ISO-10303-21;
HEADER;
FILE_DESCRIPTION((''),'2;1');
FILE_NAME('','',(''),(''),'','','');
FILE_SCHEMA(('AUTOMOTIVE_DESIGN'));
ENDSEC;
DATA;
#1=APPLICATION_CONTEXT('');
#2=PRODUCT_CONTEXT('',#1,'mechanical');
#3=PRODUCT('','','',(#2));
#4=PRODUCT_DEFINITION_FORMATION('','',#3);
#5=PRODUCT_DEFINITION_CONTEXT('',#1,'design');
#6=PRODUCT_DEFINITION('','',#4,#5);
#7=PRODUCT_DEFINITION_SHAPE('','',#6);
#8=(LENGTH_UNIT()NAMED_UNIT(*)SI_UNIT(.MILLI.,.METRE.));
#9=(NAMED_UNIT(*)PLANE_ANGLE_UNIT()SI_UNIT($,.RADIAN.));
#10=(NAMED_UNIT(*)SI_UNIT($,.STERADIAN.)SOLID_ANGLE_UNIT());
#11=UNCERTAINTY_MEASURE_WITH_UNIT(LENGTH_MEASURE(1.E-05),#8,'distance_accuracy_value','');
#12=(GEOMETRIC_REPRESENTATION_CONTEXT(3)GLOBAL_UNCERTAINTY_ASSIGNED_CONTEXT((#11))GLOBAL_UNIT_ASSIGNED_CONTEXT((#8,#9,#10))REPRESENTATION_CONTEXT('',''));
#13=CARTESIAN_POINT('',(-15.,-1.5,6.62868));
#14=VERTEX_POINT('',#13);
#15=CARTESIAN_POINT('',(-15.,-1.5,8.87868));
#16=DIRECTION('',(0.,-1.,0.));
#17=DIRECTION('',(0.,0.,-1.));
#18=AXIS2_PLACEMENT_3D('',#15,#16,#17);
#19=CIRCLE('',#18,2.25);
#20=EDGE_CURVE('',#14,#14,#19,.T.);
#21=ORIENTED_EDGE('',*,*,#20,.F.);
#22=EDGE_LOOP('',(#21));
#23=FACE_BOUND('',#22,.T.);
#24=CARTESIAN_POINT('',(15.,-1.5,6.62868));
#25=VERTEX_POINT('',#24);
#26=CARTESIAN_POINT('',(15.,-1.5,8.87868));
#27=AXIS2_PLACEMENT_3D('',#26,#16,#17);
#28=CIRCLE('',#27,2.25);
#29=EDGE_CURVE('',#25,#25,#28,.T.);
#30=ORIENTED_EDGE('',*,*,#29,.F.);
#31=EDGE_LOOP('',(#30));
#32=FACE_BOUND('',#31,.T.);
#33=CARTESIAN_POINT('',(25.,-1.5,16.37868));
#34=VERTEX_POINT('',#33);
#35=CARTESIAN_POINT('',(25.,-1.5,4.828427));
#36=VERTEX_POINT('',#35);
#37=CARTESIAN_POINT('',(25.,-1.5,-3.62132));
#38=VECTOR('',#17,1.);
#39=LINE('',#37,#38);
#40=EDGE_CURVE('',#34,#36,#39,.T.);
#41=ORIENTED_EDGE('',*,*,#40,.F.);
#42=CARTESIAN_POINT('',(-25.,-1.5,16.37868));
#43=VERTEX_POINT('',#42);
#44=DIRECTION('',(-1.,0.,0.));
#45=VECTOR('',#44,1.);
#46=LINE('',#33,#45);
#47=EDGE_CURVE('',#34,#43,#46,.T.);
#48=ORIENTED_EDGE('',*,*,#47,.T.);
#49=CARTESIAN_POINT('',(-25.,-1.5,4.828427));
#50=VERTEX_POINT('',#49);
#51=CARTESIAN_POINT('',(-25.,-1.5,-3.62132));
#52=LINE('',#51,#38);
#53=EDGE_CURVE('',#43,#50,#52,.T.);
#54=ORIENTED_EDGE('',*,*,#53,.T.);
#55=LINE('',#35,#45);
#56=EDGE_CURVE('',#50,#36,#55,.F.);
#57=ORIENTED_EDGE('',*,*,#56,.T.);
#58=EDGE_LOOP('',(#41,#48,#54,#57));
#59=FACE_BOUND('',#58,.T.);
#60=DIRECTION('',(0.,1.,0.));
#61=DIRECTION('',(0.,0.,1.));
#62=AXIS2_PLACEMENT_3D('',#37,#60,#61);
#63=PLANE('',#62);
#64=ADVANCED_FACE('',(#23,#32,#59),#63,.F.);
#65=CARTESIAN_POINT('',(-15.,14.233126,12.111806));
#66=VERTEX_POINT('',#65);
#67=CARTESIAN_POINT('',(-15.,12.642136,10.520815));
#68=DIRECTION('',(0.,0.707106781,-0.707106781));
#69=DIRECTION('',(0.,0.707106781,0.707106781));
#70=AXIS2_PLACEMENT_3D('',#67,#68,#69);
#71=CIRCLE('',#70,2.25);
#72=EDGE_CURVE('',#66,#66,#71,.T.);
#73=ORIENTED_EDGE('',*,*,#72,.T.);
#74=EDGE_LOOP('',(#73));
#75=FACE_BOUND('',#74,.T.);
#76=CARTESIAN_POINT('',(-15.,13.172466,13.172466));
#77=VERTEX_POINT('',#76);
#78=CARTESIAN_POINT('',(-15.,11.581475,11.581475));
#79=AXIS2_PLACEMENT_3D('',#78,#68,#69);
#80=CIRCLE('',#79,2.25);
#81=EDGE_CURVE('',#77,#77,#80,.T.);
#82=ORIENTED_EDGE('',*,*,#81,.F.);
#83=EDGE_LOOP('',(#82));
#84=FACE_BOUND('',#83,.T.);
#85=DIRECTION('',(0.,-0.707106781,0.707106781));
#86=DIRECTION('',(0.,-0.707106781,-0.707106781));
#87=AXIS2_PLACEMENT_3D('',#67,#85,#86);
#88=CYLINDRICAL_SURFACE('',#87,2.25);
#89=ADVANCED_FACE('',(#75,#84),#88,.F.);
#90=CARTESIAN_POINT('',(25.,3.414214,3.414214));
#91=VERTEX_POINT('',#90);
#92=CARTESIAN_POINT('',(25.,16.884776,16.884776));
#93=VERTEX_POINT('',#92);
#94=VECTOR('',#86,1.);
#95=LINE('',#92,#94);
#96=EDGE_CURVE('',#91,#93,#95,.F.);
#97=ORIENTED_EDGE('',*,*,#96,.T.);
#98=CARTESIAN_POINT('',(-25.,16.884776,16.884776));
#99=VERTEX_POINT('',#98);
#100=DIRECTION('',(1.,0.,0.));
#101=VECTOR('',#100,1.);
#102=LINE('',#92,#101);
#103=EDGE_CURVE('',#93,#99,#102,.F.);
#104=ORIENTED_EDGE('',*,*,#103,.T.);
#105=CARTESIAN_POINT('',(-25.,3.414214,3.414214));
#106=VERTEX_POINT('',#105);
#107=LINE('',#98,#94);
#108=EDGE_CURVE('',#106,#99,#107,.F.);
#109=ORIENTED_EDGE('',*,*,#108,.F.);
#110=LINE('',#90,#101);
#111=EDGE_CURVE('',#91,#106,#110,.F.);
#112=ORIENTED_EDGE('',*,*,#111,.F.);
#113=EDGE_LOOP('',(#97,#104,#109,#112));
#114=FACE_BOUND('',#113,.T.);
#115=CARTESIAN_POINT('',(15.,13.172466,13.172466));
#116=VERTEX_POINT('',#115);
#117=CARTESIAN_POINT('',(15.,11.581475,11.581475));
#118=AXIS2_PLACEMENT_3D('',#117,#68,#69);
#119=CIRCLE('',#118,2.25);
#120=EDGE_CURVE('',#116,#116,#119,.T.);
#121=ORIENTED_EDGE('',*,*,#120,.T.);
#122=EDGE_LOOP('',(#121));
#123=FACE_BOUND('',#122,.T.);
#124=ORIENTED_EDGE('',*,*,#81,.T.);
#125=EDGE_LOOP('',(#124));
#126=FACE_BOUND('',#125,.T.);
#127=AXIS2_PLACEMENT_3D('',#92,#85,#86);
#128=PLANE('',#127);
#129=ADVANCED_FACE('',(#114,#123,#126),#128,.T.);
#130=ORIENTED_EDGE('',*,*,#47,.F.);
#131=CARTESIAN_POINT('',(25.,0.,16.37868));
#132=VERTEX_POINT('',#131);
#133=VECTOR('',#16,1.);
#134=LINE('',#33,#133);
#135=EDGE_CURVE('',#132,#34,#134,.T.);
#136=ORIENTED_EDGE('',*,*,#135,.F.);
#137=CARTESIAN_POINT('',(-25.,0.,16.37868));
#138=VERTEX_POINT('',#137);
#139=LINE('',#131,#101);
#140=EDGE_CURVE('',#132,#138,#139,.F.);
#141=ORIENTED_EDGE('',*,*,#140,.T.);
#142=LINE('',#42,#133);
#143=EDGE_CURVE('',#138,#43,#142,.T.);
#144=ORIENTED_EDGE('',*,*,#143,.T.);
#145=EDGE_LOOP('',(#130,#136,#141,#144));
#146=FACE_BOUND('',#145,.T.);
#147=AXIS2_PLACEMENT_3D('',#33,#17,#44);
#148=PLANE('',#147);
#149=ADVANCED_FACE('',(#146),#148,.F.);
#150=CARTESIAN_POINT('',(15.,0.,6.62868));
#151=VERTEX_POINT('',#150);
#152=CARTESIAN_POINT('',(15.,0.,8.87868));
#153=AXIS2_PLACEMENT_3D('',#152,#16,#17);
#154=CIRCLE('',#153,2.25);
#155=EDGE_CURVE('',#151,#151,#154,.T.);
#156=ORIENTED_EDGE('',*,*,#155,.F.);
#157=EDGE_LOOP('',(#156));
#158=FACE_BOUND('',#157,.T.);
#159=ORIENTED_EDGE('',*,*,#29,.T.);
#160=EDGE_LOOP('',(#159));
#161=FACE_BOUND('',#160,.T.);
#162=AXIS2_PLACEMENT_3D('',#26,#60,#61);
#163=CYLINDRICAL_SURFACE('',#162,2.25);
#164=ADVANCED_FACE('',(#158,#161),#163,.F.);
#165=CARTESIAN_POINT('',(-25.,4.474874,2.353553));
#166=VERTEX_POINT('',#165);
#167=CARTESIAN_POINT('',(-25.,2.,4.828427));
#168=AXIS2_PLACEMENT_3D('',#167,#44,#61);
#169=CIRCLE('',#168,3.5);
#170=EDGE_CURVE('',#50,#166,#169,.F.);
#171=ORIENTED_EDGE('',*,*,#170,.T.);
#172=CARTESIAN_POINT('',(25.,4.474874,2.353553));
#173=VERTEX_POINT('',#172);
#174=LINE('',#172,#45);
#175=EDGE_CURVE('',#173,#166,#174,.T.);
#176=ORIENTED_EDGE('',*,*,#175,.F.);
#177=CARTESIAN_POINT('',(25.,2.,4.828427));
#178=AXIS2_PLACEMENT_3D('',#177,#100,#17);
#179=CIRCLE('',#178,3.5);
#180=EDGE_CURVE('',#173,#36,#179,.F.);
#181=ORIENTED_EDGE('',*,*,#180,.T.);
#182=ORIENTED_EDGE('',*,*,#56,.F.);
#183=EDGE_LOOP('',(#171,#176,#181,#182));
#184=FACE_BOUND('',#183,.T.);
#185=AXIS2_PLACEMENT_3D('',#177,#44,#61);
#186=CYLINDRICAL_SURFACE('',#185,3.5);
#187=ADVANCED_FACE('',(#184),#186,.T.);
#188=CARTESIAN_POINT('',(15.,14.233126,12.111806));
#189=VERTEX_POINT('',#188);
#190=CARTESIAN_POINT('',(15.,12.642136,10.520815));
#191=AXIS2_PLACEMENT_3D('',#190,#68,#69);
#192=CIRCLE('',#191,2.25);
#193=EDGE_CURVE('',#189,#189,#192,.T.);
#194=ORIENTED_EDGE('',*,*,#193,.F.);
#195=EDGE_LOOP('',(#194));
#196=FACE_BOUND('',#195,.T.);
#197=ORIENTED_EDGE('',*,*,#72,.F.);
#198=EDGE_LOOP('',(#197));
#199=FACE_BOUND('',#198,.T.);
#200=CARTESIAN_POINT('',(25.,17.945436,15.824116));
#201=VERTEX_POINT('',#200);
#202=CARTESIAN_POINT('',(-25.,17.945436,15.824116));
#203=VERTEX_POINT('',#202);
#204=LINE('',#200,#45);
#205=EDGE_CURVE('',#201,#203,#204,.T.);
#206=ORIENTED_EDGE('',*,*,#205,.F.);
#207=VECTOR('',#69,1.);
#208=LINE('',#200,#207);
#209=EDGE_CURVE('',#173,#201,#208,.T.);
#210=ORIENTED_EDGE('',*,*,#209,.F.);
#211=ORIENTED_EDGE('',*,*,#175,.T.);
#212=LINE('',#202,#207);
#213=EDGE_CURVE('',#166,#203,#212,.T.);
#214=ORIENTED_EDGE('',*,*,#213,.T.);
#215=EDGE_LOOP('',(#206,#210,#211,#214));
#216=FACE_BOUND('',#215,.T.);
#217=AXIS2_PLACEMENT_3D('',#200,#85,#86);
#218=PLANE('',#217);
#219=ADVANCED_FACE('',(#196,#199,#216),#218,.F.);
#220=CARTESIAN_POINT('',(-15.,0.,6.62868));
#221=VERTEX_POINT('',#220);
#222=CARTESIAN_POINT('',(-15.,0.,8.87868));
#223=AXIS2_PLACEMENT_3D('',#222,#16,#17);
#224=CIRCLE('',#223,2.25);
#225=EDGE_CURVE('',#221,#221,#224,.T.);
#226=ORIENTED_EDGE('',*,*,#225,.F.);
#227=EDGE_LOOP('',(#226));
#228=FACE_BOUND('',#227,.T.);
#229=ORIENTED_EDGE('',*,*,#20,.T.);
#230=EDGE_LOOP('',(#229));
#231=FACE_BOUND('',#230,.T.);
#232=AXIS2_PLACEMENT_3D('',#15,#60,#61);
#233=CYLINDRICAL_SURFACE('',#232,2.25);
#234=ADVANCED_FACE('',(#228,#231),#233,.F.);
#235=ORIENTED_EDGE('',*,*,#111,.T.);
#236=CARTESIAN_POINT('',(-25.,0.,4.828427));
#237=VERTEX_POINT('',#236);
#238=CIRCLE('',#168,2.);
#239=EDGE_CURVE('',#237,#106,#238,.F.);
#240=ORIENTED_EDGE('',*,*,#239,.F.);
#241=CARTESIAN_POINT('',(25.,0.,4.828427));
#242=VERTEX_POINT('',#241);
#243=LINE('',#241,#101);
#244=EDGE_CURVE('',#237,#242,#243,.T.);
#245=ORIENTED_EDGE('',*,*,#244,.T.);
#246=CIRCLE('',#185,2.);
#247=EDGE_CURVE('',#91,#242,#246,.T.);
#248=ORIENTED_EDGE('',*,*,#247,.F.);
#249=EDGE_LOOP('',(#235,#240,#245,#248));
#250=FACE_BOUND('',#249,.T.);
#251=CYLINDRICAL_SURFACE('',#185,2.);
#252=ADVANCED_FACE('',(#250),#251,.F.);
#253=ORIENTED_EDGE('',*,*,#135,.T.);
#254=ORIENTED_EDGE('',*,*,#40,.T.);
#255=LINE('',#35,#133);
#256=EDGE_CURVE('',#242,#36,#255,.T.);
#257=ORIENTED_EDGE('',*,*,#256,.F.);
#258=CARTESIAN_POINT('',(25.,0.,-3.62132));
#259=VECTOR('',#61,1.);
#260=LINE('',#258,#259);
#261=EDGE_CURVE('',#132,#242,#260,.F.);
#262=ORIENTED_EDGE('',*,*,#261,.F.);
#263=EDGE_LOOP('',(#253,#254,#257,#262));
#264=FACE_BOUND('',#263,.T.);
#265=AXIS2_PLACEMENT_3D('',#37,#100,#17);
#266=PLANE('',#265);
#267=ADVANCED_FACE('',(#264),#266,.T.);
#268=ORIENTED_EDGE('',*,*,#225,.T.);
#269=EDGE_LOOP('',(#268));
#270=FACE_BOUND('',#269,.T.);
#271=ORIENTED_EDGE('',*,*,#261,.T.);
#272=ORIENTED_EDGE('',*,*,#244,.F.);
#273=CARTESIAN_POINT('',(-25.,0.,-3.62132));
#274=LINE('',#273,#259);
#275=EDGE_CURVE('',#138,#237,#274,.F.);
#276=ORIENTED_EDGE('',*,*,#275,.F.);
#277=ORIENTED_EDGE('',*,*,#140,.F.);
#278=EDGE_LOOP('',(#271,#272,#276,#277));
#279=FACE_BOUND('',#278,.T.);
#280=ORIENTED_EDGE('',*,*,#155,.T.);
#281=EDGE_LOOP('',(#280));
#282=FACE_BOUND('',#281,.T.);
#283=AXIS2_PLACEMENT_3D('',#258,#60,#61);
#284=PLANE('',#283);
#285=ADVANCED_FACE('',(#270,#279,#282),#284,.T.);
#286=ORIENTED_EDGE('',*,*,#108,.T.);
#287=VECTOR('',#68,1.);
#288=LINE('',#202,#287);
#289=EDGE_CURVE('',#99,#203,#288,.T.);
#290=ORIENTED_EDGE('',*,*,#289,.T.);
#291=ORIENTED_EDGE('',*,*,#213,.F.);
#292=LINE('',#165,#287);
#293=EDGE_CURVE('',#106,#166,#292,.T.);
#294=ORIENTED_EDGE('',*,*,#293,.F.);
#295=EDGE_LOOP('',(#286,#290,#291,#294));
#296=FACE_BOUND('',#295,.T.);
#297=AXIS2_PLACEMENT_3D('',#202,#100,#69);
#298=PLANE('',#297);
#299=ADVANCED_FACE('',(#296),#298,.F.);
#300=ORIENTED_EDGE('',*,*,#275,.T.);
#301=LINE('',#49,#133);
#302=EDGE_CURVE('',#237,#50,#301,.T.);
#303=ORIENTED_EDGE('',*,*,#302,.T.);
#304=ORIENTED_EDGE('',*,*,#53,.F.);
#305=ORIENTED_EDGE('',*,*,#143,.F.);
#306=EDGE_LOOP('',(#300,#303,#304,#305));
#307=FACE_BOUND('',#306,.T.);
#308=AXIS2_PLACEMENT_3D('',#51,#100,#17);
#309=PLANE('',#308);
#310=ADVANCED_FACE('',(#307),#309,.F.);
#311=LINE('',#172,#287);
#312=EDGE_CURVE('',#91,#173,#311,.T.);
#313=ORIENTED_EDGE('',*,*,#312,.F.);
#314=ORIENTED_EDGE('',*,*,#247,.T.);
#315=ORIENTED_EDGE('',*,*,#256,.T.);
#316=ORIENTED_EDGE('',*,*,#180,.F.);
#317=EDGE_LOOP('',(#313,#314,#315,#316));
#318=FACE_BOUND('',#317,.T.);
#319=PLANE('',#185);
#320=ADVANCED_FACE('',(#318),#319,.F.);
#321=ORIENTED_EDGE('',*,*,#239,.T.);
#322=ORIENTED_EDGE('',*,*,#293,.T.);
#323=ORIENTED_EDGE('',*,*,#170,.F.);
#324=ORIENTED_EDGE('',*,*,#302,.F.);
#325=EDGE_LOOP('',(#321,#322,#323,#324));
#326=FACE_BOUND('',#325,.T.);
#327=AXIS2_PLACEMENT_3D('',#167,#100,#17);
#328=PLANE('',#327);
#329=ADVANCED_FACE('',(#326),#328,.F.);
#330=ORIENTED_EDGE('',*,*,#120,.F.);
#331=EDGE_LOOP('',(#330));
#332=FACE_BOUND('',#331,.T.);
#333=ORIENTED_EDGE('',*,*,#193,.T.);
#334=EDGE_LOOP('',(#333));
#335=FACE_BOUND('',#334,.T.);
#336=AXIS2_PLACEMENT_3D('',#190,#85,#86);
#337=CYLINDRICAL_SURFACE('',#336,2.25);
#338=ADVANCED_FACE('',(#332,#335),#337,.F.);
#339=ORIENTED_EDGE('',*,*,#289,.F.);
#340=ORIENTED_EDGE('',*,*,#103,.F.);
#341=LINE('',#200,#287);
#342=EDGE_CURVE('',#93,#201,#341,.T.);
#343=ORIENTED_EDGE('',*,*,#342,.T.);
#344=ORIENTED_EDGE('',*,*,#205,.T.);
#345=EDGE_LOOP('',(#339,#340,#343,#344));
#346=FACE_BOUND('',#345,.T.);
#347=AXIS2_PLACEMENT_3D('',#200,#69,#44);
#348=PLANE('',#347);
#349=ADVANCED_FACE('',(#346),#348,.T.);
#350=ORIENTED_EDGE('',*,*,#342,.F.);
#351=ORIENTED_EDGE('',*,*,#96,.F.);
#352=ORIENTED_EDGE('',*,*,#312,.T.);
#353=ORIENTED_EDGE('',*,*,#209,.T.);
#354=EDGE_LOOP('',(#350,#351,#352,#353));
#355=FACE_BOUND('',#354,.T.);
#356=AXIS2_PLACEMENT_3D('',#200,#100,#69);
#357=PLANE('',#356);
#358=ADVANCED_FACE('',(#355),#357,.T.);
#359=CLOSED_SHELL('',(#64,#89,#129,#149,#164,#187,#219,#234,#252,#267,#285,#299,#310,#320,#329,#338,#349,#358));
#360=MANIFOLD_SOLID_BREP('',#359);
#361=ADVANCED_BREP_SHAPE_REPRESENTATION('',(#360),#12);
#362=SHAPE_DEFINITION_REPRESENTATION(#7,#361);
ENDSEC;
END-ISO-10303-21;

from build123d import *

# Parameters (mm, degrees)
BOSS_EXTRUDE1_DEPTH    = 25
CUT_EXTRUDE1_REACH     = 37.102
SKETCH2_R              = 2.25
CUT_EXTRUDE2_REACH     = 37.892
SKETCH3_R              = 2.25
CONVERT_SOLID1_START   = -25
CONVERT_SOLID1_DEPTH   = 50
CONVERT_SOLID1_2_DEPTH = 50


# Read off the part's stored shape, not the designer's step: Convert-Solid1
with BuildPart() as part:
    # Sketch1 → Boss-Extrude1 (new, symmetric)
    with BuildSketch(Plane(origin=(0, 0, 0), x_dir=(0, 0, -1), z_dir=(1, 0, 0))):
        Polygon((0, 0), (-16.884776311, 16.884776311), (-15.824116139, 17.945436483), (3.621320344, -1.5), (-16.378679656, -1.5), (-16.378679656, 0), align=None)
    extrude(amount=BOSS_EXTRUDE1_DEPTH, both=True)

    # Sketch2 → Cut-Extrude1 (cut, up to next)
    with BuildSketch(Plane(origin=(0, 1.060660172, -1.060660172), x_dir=(1, 0, 0), z_dir=(0, 0.7071067811865513, -0.7071067811865438)), mode=Mode.PRIVATE) as cut_extrude1_sk1:
        with Locations(Location((-15, -16.378679656, 0), (0, 0, 270))):
            Circle(SKETCH2_R)
    cut_extrude1_tool1 = extrude(cut_extrude1_sk1.sketch, amount=-CUT_EXTRUDE1_REACH, mode=Mode.PRIVATE) & part.part
    # Sketch2 → Cut-Extrude1 (cut, up to next)
    with BuildSketch(Plane(origin=(0, 1.060660172, -1.060660172), x_dir=(1, 0, 0), z_dir=(0, 0.7071067811865513, -0.7071067811865438)), mode=Mode.PRIVATE) as cut_extrude1_sk2:
        with Locations(Location((15, -16.378679656, 0), (0, 0, 270))):
            Circle(SKETCH2_R)
    cut_extrude1_tool2 = extrude(cut_extrude1_sk2.sketch, amount=-CUT_EXTRUDE1_REACH, mode=Mode.PRIVATE) & part.part
    add(cut_extrude1_tool1.solids().sort_by_distance((-15, 12.642136, 10.520815))[0], mode=Mode.SUBTRACT)
    add(cut_extrude1_tool2.solids().sort_by_distance((15, 12.642136, 10.520815))[0], mode=Mode.SUBTRACT)

    # Sketch3 → Cut-Extrude2 (cut, up to next)
    with BuildSketch(Plane.XZ.offset(1.5), mode=Mode.PRIVATE) as cut_extrude2_sk1:
        with Locations(Location((-15, 8.878679656, 0), (0, 0, 270))):
            Circle(SKETCH3_R)
    cut_extrude2_tool1 = extrude(cut_extrude2_sk1.sketch, amount=-CUT_EXTRUDE2_REACH, mode=Mode.PRIVATE) & part.part
    # Sketch3 → Cut-Extrude2 (cut, up to next)
    with BuildSketch(Plane.XZ.offset(1.5), mode=Mode.PRIVATE) as cut_extrude2_sk2:
        with Locations(Location((15, 8.878679656, 0), (0, 0, 270))):
            Circle(SKETCH3_R)
    cut_extrude2_tool2 = extrude(cut_extrude2_sk2.sketch, amount=-CUT_EXTRUDE2_REACH, mode=Mode.PRIVATE) & part.part
    add(cut_extrude2_tool1.solids().sort_by_distance((-15, -1.5, 8.87868))[0], mode=Mode.SUBTRACT)
    add(cut_extrude2_tool2.solids().sort_by_distance((15, -1.5, 8.87868))[0], mode=Mode.SUBTRACT)

    # Convert-Solid1 outline → Convert-Solid1 (cut)
    with BuildSketch(Plane.YZ.offset(CONVERT_SOLID1_START)):
        with BuildLine():
            Line((-1.5, -3.621320344), (4.474873734, 2.353553391))
            ThreePointArc((4.474873734, 2.353553391), (3.048097173, 1.489042104), (1.383203961, 1.383203961))
            Line((1.383203961, 1.383203961), (0, 0))
            Line((0, 0), (0, 1.956145802))
            ThreePointArc((0, 1.956145802), (-1.102418412, 3.20824195), (-1.5, 4.828427125))
            Line((-1.5, 4.828427125), (-1.5, -3.621320344))
        make_face()
    extrude(amount=CONVERT_SOLID1_DEPTH, mode=Mode.SUBTRACT)

    # Convert-Solid1 2 outline → Convert-Solid1 2 (add)
    with BuildSketch(Plane.YZ.offset(CONVERT_SOLID1_START)):
        with BuildLine():
            ThreePointArc((0, 1.956145802), (0.660607987, 1.594848761), (1.383203961, 1.383203961))
            Line((1.383203961, 1.383203961), (3.414213562, 3.414213562))
            ThreePointArc((3.414213562, 3.414213562), (1.234633135, 2.98066806), (0, 4.828427125))
            Line((0, 4.828427125), (0, 1.956145802))
        make_face()
    extrude(amount=CONVERT_SOLID1_2_DEPTH)


solid = part.part
